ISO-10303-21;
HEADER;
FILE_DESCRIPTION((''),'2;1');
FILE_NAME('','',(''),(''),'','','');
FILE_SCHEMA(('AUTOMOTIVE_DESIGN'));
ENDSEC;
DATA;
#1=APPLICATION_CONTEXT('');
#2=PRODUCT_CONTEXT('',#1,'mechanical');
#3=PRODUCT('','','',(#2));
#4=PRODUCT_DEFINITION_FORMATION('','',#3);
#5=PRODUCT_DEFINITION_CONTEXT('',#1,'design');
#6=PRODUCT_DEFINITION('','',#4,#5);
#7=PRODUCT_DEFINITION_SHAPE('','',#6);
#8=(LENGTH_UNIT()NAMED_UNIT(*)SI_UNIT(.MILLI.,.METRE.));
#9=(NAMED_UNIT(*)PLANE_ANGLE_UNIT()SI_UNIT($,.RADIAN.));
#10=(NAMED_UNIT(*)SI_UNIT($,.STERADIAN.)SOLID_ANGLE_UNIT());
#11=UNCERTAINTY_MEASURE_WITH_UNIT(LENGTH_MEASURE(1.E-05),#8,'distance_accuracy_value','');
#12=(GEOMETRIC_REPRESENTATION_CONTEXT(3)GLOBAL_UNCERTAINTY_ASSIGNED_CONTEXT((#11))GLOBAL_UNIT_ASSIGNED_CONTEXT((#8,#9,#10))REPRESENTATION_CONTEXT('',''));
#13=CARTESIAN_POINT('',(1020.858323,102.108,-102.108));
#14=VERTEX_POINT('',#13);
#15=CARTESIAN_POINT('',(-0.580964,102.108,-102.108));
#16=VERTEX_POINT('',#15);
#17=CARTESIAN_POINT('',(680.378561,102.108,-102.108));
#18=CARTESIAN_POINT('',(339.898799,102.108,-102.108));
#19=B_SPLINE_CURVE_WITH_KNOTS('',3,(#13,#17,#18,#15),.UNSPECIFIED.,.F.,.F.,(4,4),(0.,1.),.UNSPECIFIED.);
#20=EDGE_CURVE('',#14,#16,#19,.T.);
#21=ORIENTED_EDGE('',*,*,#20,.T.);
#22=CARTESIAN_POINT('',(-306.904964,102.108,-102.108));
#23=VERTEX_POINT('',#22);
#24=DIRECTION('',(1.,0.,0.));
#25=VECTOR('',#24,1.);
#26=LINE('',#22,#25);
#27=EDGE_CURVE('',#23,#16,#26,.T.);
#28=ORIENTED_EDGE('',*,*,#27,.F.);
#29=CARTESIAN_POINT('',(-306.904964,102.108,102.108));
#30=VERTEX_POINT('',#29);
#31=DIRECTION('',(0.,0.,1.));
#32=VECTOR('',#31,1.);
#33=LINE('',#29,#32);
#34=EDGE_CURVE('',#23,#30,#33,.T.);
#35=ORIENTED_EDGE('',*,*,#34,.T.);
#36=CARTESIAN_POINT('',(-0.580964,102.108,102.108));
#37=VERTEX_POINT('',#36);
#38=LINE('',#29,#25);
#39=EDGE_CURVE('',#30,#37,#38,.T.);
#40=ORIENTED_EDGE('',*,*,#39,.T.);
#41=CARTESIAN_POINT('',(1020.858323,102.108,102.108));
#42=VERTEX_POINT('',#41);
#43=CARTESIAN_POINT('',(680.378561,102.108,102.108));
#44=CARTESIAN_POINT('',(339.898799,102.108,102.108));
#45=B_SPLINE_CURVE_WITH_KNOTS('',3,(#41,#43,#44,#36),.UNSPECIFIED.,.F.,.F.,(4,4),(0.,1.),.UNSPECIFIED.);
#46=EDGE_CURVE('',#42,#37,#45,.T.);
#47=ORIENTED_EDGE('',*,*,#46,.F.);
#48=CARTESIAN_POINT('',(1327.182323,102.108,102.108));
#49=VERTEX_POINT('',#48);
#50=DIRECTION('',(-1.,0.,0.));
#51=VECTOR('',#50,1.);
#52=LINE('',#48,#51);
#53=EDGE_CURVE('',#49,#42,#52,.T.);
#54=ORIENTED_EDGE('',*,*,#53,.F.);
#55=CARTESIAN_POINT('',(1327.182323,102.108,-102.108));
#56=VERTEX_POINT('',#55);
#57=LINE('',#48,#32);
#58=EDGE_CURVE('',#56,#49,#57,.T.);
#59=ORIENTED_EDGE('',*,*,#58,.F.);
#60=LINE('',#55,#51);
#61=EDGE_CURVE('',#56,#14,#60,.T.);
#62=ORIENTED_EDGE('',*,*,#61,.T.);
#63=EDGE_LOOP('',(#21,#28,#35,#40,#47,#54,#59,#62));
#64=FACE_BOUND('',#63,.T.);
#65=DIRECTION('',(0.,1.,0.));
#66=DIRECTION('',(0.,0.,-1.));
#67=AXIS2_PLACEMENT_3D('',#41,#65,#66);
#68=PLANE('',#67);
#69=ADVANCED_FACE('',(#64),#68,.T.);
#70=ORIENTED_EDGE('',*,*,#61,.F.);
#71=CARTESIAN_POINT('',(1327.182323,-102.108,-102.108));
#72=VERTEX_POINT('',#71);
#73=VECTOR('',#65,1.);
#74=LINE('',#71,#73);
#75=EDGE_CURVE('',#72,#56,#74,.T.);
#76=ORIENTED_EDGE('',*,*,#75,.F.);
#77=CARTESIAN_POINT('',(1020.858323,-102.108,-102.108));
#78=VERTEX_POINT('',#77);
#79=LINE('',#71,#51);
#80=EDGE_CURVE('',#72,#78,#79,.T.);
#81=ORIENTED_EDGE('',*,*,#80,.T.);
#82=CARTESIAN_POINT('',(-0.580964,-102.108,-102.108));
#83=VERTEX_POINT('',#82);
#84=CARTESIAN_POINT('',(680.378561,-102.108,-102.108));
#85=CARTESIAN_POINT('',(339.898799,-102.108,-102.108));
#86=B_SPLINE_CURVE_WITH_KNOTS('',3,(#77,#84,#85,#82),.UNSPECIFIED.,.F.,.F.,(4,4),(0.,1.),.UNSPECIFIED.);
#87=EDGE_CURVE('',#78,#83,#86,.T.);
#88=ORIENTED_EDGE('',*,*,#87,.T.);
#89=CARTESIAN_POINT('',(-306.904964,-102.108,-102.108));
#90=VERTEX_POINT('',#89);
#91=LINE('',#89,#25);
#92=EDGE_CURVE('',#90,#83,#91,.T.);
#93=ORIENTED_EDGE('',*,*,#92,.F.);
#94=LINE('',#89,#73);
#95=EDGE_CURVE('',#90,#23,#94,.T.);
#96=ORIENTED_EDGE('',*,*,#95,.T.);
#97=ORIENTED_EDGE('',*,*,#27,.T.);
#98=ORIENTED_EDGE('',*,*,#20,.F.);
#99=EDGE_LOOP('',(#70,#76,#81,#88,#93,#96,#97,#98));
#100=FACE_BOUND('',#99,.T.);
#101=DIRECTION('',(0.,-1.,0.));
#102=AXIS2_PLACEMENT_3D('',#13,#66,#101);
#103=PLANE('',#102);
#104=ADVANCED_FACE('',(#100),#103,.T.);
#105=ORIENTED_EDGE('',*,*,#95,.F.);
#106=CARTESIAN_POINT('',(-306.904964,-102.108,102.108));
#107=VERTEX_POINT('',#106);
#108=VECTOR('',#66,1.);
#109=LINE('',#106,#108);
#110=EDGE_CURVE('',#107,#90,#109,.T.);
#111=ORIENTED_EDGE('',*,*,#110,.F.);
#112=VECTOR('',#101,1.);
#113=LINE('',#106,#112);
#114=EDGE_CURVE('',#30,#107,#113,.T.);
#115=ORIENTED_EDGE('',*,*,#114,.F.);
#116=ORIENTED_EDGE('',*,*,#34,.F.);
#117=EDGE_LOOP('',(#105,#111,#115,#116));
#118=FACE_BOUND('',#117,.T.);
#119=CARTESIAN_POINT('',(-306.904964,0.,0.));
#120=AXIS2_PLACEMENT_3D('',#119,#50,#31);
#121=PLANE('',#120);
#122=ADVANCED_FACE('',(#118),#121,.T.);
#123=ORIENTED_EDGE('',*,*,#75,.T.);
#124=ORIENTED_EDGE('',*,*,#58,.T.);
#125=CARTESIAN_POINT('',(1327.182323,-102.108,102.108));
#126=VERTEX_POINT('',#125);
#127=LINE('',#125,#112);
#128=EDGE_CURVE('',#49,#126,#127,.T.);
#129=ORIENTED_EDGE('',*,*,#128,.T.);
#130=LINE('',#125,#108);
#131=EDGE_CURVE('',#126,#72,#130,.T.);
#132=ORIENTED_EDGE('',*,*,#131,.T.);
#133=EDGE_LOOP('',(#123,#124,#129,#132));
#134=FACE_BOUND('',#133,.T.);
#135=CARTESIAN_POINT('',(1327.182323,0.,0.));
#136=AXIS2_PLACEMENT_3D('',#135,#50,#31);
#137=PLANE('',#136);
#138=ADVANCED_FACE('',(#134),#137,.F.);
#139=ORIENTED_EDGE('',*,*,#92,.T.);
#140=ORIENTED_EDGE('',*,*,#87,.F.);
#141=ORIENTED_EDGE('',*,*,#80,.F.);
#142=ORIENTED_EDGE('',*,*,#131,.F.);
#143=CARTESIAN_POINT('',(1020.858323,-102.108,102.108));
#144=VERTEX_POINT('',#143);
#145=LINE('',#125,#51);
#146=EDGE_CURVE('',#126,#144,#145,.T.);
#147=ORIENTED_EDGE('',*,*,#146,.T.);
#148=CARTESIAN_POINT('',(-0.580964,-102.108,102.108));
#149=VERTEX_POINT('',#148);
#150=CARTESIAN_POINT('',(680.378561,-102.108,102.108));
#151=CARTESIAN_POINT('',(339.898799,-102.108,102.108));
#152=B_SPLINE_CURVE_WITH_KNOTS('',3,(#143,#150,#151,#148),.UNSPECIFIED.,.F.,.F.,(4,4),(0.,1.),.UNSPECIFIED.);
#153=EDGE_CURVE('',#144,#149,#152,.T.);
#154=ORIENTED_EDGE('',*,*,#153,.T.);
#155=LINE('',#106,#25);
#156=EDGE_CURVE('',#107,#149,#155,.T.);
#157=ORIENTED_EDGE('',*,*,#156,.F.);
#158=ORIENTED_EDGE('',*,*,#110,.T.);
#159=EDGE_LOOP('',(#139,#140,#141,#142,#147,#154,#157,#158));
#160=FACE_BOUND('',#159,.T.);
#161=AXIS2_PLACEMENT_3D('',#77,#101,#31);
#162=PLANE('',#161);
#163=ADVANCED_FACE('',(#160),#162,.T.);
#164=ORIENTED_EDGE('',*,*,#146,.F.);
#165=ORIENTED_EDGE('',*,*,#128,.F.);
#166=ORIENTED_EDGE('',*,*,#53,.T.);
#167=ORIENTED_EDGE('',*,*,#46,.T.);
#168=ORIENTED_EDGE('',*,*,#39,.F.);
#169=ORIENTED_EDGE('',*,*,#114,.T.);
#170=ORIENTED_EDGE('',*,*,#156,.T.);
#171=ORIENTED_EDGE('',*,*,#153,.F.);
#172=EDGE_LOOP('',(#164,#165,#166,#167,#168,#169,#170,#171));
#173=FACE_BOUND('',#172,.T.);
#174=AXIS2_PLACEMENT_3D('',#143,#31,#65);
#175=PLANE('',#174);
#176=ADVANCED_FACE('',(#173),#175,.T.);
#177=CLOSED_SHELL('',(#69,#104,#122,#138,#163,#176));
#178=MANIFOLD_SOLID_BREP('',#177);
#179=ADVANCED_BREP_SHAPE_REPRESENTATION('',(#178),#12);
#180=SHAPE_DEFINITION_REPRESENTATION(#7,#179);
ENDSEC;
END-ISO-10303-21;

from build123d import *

# Parameters (mm, degrees)
LOFT1_START         = -0.580963743
LOFT1_OUTLINE_W     = 204.216
LOFT1_OUTLINE_H     = 204.216
LOFT1_DEPTH         = 1021.439287056
SKETCH3_3_W         = 204.216
SKETCH3_3_H         = 204.216
BOSS_EXTRUDE3_DEPTH = 306.324
SKETCH2_4_W         = 204.216
SKETCH2_4_H         = 204.216
BOSS_EXTRUDE5_DEPTH = 306.324


# Read off the part's stored shape, not the designer's step: Loft1
with BuildPart() as part:
    # Loft1 outline → Loft1 (new body)
    with BuildSketch(Plane.YZ.offset(LOFT1_START)):
        Rectangle(LOFT1_OUTLINE_W, LOFT1_OUTLINE_H)
    extrude(amount=LOFT1_DEPTH)

    # Sketch3<3> → Boss-Extrude3 (add)
    with BuildSketch(Plane(origin=(1020.858323313, 0, 0), x_dir=(0, 0, -1), z_dir=(1, 0, 0))):
        Rectangle(SKETCH3_3_W, SKETCH3_3_H)
    extrude(amount=BOSS_EXTRUDE3_DEPTH)

    # Sketch2<4> → Boss-Extrude5 (add)
    with BuildSketch(Plane(origin=(-0.580963743, 0, 0), x_dir=(0, 0, -1), z_dir=(1, 0, 0))):
        Rectangle(SKETCH2_4_W, SKETCH2_4_H)
    extrude(amount=-BOSS_EXTRUDE5_DEPTH)


solid = part.part
